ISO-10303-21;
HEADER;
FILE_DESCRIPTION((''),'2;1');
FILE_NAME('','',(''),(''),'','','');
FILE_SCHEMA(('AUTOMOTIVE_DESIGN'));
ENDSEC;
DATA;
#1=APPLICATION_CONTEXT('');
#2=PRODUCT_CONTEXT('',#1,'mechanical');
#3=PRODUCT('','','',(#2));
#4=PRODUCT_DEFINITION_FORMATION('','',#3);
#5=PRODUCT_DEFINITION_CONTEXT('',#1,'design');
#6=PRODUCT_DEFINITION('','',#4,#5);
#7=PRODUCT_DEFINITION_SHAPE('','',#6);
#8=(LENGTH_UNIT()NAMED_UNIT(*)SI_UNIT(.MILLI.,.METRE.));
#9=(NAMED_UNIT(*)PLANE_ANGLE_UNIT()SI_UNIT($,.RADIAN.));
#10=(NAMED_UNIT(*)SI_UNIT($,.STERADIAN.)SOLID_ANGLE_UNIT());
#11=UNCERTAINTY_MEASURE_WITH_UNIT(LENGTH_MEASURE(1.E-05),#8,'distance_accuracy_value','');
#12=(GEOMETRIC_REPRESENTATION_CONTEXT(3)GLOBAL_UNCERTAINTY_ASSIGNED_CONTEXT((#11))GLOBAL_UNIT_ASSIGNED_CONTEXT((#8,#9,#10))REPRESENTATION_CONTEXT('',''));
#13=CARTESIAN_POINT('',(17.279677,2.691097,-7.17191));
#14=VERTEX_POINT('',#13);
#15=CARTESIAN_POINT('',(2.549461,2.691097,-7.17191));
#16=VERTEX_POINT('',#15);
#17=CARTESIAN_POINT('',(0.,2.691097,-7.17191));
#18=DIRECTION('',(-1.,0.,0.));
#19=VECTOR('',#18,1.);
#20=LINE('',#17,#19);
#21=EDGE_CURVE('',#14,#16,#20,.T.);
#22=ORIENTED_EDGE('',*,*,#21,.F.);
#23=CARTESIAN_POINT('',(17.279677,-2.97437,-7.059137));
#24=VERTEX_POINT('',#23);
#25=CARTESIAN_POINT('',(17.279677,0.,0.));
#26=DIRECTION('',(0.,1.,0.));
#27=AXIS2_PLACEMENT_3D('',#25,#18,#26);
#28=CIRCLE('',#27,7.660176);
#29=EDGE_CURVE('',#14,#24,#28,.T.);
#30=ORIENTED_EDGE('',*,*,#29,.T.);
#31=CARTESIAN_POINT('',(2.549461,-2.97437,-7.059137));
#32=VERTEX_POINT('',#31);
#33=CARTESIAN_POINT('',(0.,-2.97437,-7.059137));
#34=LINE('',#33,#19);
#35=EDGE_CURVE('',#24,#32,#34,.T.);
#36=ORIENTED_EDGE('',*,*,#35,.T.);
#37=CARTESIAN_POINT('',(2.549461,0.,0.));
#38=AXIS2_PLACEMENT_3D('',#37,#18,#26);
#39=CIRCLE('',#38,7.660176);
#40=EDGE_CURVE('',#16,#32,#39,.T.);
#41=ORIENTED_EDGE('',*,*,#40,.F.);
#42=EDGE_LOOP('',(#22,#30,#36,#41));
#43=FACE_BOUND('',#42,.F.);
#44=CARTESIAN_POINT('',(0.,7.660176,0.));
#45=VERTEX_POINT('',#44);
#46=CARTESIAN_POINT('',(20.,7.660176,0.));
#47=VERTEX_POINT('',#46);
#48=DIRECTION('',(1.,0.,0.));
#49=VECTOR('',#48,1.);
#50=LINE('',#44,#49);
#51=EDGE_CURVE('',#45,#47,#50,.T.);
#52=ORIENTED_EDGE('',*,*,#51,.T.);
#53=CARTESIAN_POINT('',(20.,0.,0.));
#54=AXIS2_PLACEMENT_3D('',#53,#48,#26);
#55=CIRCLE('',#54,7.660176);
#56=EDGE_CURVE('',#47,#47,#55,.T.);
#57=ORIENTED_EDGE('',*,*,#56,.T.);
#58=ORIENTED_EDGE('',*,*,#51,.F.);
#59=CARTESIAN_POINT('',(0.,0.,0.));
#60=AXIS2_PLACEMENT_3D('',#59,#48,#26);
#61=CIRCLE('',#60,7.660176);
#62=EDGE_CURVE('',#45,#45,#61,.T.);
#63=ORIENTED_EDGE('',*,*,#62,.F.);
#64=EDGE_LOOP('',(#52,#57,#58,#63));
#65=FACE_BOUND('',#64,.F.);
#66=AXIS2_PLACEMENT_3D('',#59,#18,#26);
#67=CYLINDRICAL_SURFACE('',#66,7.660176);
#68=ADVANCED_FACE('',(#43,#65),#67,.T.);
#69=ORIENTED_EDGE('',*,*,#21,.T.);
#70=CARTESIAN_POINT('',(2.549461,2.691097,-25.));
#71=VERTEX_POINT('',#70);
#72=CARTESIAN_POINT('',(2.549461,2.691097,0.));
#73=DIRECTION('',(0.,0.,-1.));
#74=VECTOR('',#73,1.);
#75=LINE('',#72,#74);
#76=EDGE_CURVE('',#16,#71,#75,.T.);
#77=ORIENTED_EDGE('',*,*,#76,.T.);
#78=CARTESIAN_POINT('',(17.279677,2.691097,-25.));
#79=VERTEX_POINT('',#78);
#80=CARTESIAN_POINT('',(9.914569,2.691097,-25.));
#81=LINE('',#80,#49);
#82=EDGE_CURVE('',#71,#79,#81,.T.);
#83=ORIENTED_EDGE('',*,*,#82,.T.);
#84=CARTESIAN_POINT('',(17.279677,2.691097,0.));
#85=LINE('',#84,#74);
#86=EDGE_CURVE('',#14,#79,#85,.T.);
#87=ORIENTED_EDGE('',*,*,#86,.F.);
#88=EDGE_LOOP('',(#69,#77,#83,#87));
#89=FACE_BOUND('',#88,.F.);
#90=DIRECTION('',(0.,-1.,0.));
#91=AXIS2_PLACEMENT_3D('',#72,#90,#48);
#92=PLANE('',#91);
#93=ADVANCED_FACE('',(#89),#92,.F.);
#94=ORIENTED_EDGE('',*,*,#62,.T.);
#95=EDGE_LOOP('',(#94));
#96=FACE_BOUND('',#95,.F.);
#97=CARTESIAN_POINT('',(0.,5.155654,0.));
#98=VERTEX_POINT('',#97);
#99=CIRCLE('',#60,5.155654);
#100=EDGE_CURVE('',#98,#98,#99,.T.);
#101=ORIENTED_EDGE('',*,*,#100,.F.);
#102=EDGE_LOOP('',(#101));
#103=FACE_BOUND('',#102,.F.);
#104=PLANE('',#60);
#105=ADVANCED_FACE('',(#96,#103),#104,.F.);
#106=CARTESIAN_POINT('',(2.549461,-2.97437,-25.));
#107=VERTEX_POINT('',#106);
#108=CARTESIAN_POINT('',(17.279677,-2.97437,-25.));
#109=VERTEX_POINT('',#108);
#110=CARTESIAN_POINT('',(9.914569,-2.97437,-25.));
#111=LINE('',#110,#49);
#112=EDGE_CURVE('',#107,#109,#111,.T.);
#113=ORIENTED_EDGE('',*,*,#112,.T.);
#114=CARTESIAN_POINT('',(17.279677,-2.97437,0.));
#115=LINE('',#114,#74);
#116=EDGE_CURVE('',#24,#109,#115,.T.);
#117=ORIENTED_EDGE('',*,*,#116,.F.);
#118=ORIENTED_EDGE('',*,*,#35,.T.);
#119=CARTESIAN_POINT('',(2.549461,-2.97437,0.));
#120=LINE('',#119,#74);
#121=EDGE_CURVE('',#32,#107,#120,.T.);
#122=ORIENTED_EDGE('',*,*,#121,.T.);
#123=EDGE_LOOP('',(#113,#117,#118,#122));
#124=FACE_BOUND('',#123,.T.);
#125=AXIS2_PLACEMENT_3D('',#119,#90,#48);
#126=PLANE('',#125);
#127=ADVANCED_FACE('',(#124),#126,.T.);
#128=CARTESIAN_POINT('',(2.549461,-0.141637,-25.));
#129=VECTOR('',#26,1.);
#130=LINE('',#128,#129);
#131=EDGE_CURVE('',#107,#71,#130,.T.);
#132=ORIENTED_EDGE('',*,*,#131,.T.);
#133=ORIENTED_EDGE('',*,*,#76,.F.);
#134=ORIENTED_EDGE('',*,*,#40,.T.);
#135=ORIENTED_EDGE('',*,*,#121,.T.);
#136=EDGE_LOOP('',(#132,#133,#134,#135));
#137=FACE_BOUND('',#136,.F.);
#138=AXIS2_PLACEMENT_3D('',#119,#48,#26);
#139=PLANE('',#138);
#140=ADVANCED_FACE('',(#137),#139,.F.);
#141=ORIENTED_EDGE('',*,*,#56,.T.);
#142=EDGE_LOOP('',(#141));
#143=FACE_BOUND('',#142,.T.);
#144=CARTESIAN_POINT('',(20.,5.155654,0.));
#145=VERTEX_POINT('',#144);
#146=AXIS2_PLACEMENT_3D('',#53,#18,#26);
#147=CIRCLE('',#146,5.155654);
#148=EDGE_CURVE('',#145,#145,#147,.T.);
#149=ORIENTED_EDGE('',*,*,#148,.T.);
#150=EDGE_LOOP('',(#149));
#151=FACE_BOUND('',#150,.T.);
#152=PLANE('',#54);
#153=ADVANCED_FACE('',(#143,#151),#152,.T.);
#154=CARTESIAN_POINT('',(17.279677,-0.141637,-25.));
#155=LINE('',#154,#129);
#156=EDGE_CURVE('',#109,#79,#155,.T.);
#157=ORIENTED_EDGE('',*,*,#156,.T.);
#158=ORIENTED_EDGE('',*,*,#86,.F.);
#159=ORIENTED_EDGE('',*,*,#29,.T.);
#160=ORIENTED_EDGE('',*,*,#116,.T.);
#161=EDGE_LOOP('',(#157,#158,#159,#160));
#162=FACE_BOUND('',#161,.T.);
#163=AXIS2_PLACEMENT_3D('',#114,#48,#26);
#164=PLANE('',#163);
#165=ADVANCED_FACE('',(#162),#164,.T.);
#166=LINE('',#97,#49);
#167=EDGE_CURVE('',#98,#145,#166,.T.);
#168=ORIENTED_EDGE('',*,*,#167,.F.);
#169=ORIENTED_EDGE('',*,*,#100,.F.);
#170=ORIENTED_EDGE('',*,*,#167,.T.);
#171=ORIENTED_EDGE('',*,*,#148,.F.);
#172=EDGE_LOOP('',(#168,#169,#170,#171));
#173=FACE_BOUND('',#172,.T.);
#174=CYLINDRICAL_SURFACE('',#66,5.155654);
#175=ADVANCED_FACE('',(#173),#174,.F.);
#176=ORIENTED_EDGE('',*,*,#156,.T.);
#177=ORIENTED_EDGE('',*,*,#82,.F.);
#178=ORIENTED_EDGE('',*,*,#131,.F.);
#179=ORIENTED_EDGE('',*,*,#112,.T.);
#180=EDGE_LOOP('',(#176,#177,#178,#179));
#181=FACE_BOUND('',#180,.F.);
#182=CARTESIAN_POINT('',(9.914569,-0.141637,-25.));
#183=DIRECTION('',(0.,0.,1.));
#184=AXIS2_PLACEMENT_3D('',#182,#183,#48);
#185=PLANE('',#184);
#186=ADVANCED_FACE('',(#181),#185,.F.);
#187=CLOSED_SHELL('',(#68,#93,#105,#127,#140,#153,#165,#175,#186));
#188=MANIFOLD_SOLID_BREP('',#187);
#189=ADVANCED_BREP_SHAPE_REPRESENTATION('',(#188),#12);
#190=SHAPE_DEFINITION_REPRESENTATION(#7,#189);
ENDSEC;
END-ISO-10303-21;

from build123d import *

# Parameters (mm, degrees)
F0_R     = 7.6601757708
F1_DEPTH = 20
F2_W     = 14.7302162368
F2_H     = 5.6654675864
F3_DEPTH = 25
F4_R     = 5.1556537043
F5_DEPTH = 38.2


# Not quite as in the source:
# - a feature of the source that left no trace in its solid (it failed there, or was rolled back) is left out


with BuildPart() as f1:
    # F0 (on Right) → F1 (new body)
    with BuildSketch(Plane.YZ):
        Circle(F0_R)
    extrude(amount=F1_DEPTH)

    # F2 (on Top) → F3 (join)
    with BuildSketch(Plane.XY):
        with Locations((9.9145689746, -0.1416367013)):
            Rectangle(F2_W, F2_H)
    extrude(amount=-F3_DEPTH)

    # F4 (on Right) → F5 (cut)
    with BuildSketch(Plane.YZ):
        Circle(F4_R)
    extrude(amount=F5_DEPTH, mode=Mode.SUBTRACT)


solid = f1.part
